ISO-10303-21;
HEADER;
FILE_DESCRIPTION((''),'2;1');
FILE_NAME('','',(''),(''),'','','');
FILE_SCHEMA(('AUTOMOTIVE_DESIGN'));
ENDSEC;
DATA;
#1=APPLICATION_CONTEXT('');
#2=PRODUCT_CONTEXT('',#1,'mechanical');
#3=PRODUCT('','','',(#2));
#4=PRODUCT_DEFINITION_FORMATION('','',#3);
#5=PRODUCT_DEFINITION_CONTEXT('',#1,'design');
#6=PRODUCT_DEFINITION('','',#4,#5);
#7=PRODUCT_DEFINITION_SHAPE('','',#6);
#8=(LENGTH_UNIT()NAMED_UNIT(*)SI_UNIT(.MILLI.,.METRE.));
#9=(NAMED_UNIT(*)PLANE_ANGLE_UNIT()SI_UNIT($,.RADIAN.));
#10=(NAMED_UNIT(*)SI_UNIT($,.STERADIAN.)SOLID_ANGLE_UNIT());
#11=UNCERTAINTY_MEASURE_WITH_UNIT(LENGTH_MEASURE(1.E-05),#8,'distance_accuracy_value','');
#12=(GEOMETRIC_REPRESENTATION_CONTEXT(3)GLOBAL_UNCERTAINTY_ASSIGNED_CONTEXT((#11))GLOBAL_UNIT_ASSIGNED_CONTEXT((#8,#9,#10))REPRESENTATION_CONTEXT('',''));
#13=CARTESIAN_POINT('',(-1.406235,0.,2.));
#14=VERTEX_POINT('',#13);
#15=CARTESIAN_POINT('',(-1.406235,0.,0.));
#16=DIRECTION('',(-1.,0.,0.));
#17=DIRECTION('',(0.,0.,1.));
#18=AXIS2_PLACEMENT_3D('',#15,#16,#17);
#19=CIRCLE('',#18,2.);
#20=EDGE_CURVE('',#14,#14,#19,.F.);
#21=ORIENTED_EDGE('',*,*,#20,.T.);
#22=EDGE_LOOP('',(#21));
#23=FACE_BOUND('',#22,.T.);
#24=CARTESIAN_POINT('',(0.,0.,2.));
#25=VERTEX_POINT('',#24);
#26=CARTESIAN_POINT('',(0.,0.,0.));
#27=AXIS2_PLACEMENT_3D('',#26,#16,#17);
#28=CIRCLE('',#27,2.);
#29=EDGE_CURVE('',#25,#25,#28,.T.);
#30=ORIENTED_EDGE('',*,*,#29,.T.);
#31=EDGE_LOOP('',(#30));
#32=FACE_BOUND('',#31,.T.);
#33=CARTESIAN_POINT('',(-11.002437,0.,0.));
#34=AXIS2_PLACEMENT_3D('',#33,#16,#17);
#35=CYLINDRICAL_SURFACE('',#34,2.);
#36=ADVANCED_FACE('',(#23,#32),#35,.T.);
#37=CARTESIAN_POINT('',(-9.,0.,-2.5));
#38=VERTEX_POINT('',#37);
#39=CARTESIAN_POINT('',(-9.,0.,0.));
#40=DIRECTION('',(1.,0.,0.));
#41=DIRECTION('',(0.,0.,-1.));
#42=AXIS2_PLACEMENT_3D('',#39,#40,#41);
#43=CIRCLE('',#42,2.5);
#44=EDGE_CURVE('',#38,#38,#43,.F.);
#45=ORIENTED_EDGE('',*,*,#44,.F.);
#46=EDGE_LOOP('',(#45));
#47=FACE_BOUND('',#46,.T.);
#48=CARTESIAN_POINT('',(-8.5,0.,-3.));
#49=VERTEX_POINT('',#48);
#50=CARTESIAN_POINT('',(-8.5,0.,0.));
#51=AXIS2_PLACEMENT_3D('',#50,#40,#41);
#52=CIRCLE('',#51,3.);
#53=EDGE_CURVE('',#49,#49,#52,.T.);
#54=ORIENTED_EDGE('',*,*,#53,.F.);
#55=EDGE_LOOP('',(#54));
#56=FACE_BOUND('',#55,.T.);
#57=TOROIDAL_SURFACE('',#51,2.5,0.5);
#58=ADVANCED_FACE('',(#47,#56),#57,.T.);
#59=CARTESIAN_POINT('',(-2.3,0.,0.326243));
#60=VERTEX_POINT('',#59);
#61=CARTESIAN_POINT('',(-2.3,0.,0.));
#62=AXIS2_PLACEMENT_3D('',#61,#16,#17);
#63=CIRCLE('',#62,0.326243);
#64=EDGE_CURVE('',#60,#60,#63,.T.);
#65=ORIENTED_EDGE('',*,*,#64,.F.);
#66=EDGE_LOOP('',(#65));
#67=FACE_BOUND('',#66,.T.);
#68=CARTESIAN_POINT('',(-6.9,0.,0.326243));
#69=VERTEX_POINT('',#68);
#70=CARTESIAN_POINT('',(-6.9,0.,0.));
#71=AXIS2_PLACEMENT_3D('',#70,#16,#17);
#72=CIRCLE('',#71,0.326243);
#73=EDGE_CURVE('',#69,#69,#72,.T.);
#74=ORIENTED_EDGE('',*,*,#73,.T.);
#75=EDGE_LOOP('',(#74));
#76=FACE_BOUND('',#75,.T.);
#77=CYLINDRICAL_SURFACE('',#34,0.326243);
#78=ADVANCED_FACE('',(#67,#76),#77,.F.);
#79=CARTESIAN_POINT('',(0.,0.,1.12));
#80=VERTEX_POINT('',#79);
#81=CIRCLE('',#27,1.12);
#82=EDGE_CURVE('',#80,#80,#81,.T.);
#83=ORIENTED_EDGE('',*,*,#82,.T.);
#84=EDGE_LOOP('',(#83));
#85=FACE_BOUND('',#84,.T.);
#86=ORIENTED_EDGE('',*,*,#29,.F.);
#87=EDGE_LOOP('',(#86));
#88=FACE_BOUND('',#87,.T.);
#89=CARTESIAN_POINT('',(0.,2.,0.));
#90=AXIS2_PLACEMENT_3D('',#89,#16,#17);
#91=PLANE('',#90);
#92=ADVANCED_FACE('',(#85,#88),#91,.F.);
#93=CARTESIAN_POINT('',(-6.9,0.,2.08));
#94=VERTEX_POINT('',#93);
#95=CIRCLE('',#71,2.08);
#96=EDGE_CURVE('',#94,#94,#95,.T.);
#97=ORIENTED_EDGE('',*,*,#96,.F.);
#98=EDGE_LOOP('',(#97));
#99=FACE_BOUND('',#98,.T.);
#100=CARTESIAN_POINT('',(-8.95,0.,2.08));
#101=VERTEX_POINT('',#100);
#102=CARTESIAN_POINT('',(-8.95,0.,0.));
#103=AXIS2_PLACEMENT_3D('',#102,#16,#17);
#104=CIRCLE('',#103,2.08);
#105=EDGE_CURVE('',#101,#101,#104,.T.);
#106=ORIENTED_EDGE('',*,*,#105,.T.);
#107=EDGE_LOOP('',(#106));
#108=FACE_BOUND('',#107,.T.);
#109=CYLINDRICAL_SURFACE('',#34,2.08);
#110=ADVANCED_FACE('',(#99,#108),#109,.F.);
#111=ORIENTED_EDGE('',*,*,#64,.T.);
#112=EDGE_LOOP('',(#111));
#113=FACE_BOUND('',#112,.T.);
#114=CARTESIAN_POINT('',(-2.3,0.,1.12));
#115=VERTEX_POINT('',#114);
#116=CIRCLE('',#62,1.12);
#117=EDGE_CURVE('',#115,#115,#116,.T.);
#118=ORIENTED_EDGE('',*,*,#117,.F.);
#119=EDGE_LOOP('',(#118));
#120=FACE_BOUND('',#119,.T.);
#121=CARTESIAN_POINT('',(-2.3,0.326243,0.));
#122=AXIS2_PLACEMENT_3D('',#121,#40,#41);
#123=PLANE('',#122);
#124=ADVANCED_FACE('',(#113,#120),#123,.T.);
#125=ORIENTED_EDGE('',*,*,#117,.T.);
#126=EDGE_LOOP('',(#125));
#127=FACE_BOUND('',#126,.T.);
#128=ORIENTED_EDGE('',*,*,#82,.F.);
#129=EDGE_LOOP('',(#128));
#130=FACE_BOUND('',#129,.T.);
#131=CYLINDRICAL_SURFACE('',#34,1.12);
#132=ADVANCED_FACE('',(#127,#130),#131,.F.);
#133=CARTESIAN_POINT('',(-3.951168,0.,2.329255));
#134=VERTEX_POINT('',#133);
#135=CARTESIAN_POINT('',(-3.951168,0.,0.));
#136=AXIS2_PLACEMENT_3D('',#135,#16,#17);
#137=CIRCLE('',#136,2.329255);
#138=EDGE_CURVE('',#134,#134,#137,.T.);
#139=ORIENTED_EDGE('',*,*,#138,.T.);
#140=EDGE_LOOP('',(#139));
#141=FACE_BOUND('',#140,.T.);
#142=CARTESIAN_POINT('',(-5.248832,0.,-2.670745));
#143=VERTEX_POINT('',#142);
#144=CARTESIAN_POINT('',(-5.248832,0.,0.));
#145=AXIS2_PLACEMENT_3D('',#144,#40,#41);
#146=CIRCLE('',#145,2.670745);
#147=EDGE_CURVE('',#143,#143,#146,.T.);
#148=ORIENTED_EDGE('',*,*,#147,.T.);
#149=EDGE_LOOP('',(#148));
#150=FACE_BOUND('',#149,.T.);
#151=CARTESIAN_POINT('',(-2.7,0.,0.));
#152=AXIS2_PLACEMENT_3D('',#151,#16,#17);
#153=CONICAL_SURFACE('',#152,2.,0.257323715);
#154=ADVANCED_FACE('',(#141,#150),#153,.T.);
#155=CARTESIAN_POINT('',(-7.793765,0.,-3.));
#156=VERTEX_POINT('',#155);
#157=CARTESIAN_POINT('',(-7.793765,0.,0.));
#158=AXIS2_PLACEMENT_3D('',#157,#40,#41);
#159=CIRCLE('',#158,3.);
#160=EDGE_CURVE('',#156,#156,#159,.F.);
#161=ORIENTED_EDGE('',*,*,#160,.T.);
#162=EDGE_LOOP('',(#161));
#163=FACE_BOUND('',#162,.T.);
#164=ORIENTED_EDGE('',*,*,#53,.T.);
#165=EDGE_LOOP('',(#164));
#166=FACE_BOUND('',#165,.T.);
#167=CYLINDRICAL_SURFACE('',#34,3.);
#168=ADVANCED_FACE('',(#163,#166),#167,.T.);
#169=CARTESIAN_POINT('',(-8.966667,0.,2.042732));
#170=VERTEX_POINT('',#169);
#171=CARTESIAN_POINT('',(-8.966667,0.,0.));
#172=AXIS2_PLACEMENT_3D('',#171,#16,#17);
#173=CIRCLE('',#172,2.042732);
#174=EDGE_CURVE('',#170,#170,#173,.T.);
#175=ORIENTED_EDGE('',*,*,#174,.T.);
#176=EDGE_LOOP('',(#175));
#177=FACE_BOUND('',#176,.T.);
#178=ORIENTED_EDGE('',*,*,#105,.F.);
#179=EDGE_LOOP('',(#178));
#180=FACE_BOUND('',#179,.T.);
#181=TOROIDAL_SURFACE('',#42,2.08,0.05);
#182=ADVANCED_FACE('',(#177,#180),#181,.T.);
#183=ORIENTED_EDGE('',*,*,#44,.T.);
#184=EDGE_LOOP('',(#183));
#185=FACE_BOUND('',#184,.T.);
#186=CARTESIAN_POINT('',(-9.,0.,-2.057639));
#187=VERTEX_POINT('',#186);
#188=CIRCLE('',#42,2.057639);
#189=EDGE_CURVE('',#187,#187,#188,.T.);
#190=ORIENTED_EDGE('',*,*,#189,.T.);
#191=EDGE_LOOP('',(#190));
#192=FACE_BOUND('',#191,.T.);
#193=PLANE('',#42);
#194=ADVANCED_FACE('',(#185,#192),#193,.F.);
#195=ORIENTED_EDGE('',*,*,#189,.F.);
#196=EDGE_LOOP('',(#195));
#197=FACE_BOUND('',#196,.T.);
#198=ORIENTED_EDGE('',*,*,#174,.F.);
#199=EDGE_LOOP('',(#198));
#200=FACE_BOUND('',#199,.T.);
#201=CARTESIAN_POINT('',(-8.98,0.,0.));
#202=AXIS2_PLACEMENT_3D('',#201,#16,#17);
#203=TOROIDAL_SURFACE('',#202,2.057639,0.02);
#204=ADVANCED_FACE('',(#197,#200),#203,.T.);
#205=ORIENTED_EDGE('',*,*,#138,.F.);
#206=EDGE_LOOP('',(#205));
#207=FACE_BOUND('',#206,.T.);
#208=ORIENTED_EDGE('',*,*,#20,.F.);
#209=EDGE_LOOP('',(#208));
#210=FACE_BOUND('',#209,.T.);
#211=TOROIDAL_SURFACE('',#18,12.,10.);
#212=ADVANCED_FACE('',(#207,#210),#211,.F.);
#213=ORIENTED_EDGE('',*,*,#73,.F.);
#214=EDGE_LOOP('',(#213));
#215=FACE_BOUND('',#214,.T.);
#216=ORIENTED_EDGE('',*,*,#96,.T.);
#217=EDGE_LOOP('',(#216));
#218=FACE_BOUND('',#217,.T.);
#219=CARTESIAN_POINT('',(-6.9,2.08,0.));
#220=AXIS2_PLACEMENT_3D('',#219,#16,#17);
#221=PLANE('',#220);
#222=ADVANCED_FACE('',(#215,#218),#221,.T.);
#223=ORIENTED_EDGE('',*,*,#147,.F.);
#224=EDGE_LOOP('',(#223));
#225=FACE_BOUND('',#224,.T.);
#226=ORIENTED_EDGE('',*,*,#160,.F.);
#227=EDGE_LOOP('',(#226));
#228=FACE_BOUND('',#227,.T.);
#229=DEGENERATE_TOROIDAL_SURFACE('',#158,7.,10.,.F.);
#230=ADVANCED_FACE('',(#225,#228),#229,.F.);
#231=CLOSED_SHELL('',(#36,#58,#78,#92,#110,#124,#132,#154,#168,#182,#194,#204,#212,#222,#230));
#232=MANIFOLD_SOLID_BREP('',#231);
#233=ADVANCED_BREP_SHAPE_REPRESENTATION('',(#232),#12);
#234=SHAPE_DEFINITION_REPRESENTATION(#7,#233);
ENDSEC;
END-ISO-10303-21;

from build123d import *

# Parameters (mm, degrees)
FILLET2_R = 0.05
FILLET4_R = 0.02
FILLET5_R = 10
FILLET6_R = 10
FILLET7_R = 0.5


with BuildPart() as part:
    # Sketch2 → Revolve1 (revolve)
    with BuildSketch(Plane.XY, mode=Mode.PRIVATE) as revolve1_sk:
        Polygon((-9, 0), (-9, 3), (-6.5, 3), (-2.7, 2), (0, 2), (0, 0), align=None)
    revolve(revolve1_sk.sketch.rotate(Axis((-11.002436832, 0, 0), (1, 0, 0)), 90), axis=Axis((-11.002436832, 0, 0), (1, 0, 0)))

    # Sketch1 → Cut-Revolve1 (revolve, cut)
    with BuildSketch(Plane.XY, mode=Mode.PRIVATE) as cut_revolve1_sk:
        Polygon((-9, 0), (-9, 2.03), (-8.95, 2.03), (-8.95, 2.08), (-6.9, 2.08), (-6.9, 0.326243131), (-2.3, 0.326243131), (-2.3, 1.12), (0, 1.12), (0, 0), align=None)
    revolve(cut_revolve1_sk.sketch.rotate(Axis((-11.002436832, 0, 0), (1, 0, 0)), 90), axis=Axis((-11.002436832, 0, 0), (1, 0, 0)), mode=Mode.SUBTRACT)

    # Fillet2
    fillet2_edges = [part.edges().sort_by_distance(p)[0] for p in [
        (-8.95, 0, -2.03),
    ]]
    fillet(fillet2_edges, radius=FILLET2_R - 0.0001)  # a hair under: the kernel refuses the full size

    # Fillet4
    fillet4_edges = [part.edges().sort_by_distance(p)[0] for p in [
        (-9, 0, -2.03),
    ]]
    fillet(fillet4_edges, radius=FILLET4_R)

    # Fillet5
    fillet5_edges = [part.edges().sort_by_distance(p)[0] for p in [
        (-6.5, 0, -3),
    ]]
    fillet(fillet5_edges, radius=FILLET5_R)

    # Fillet6
    fillet6_edges = [part.edges().sort_by_distance(p)[0] for p in [
        (-2.7, 0, -2),
    ]]
    fillet(fillet6_edges, radius=FILLET6_R)

    # Fillet7
    fillet7_edges = [part.edges().sort_by_distance(p)[0] for p in [
        (-9, 0, -3),
    ]]
    fillet(fillet7_edges, radius=FILLET7_R)


solid = part.part
